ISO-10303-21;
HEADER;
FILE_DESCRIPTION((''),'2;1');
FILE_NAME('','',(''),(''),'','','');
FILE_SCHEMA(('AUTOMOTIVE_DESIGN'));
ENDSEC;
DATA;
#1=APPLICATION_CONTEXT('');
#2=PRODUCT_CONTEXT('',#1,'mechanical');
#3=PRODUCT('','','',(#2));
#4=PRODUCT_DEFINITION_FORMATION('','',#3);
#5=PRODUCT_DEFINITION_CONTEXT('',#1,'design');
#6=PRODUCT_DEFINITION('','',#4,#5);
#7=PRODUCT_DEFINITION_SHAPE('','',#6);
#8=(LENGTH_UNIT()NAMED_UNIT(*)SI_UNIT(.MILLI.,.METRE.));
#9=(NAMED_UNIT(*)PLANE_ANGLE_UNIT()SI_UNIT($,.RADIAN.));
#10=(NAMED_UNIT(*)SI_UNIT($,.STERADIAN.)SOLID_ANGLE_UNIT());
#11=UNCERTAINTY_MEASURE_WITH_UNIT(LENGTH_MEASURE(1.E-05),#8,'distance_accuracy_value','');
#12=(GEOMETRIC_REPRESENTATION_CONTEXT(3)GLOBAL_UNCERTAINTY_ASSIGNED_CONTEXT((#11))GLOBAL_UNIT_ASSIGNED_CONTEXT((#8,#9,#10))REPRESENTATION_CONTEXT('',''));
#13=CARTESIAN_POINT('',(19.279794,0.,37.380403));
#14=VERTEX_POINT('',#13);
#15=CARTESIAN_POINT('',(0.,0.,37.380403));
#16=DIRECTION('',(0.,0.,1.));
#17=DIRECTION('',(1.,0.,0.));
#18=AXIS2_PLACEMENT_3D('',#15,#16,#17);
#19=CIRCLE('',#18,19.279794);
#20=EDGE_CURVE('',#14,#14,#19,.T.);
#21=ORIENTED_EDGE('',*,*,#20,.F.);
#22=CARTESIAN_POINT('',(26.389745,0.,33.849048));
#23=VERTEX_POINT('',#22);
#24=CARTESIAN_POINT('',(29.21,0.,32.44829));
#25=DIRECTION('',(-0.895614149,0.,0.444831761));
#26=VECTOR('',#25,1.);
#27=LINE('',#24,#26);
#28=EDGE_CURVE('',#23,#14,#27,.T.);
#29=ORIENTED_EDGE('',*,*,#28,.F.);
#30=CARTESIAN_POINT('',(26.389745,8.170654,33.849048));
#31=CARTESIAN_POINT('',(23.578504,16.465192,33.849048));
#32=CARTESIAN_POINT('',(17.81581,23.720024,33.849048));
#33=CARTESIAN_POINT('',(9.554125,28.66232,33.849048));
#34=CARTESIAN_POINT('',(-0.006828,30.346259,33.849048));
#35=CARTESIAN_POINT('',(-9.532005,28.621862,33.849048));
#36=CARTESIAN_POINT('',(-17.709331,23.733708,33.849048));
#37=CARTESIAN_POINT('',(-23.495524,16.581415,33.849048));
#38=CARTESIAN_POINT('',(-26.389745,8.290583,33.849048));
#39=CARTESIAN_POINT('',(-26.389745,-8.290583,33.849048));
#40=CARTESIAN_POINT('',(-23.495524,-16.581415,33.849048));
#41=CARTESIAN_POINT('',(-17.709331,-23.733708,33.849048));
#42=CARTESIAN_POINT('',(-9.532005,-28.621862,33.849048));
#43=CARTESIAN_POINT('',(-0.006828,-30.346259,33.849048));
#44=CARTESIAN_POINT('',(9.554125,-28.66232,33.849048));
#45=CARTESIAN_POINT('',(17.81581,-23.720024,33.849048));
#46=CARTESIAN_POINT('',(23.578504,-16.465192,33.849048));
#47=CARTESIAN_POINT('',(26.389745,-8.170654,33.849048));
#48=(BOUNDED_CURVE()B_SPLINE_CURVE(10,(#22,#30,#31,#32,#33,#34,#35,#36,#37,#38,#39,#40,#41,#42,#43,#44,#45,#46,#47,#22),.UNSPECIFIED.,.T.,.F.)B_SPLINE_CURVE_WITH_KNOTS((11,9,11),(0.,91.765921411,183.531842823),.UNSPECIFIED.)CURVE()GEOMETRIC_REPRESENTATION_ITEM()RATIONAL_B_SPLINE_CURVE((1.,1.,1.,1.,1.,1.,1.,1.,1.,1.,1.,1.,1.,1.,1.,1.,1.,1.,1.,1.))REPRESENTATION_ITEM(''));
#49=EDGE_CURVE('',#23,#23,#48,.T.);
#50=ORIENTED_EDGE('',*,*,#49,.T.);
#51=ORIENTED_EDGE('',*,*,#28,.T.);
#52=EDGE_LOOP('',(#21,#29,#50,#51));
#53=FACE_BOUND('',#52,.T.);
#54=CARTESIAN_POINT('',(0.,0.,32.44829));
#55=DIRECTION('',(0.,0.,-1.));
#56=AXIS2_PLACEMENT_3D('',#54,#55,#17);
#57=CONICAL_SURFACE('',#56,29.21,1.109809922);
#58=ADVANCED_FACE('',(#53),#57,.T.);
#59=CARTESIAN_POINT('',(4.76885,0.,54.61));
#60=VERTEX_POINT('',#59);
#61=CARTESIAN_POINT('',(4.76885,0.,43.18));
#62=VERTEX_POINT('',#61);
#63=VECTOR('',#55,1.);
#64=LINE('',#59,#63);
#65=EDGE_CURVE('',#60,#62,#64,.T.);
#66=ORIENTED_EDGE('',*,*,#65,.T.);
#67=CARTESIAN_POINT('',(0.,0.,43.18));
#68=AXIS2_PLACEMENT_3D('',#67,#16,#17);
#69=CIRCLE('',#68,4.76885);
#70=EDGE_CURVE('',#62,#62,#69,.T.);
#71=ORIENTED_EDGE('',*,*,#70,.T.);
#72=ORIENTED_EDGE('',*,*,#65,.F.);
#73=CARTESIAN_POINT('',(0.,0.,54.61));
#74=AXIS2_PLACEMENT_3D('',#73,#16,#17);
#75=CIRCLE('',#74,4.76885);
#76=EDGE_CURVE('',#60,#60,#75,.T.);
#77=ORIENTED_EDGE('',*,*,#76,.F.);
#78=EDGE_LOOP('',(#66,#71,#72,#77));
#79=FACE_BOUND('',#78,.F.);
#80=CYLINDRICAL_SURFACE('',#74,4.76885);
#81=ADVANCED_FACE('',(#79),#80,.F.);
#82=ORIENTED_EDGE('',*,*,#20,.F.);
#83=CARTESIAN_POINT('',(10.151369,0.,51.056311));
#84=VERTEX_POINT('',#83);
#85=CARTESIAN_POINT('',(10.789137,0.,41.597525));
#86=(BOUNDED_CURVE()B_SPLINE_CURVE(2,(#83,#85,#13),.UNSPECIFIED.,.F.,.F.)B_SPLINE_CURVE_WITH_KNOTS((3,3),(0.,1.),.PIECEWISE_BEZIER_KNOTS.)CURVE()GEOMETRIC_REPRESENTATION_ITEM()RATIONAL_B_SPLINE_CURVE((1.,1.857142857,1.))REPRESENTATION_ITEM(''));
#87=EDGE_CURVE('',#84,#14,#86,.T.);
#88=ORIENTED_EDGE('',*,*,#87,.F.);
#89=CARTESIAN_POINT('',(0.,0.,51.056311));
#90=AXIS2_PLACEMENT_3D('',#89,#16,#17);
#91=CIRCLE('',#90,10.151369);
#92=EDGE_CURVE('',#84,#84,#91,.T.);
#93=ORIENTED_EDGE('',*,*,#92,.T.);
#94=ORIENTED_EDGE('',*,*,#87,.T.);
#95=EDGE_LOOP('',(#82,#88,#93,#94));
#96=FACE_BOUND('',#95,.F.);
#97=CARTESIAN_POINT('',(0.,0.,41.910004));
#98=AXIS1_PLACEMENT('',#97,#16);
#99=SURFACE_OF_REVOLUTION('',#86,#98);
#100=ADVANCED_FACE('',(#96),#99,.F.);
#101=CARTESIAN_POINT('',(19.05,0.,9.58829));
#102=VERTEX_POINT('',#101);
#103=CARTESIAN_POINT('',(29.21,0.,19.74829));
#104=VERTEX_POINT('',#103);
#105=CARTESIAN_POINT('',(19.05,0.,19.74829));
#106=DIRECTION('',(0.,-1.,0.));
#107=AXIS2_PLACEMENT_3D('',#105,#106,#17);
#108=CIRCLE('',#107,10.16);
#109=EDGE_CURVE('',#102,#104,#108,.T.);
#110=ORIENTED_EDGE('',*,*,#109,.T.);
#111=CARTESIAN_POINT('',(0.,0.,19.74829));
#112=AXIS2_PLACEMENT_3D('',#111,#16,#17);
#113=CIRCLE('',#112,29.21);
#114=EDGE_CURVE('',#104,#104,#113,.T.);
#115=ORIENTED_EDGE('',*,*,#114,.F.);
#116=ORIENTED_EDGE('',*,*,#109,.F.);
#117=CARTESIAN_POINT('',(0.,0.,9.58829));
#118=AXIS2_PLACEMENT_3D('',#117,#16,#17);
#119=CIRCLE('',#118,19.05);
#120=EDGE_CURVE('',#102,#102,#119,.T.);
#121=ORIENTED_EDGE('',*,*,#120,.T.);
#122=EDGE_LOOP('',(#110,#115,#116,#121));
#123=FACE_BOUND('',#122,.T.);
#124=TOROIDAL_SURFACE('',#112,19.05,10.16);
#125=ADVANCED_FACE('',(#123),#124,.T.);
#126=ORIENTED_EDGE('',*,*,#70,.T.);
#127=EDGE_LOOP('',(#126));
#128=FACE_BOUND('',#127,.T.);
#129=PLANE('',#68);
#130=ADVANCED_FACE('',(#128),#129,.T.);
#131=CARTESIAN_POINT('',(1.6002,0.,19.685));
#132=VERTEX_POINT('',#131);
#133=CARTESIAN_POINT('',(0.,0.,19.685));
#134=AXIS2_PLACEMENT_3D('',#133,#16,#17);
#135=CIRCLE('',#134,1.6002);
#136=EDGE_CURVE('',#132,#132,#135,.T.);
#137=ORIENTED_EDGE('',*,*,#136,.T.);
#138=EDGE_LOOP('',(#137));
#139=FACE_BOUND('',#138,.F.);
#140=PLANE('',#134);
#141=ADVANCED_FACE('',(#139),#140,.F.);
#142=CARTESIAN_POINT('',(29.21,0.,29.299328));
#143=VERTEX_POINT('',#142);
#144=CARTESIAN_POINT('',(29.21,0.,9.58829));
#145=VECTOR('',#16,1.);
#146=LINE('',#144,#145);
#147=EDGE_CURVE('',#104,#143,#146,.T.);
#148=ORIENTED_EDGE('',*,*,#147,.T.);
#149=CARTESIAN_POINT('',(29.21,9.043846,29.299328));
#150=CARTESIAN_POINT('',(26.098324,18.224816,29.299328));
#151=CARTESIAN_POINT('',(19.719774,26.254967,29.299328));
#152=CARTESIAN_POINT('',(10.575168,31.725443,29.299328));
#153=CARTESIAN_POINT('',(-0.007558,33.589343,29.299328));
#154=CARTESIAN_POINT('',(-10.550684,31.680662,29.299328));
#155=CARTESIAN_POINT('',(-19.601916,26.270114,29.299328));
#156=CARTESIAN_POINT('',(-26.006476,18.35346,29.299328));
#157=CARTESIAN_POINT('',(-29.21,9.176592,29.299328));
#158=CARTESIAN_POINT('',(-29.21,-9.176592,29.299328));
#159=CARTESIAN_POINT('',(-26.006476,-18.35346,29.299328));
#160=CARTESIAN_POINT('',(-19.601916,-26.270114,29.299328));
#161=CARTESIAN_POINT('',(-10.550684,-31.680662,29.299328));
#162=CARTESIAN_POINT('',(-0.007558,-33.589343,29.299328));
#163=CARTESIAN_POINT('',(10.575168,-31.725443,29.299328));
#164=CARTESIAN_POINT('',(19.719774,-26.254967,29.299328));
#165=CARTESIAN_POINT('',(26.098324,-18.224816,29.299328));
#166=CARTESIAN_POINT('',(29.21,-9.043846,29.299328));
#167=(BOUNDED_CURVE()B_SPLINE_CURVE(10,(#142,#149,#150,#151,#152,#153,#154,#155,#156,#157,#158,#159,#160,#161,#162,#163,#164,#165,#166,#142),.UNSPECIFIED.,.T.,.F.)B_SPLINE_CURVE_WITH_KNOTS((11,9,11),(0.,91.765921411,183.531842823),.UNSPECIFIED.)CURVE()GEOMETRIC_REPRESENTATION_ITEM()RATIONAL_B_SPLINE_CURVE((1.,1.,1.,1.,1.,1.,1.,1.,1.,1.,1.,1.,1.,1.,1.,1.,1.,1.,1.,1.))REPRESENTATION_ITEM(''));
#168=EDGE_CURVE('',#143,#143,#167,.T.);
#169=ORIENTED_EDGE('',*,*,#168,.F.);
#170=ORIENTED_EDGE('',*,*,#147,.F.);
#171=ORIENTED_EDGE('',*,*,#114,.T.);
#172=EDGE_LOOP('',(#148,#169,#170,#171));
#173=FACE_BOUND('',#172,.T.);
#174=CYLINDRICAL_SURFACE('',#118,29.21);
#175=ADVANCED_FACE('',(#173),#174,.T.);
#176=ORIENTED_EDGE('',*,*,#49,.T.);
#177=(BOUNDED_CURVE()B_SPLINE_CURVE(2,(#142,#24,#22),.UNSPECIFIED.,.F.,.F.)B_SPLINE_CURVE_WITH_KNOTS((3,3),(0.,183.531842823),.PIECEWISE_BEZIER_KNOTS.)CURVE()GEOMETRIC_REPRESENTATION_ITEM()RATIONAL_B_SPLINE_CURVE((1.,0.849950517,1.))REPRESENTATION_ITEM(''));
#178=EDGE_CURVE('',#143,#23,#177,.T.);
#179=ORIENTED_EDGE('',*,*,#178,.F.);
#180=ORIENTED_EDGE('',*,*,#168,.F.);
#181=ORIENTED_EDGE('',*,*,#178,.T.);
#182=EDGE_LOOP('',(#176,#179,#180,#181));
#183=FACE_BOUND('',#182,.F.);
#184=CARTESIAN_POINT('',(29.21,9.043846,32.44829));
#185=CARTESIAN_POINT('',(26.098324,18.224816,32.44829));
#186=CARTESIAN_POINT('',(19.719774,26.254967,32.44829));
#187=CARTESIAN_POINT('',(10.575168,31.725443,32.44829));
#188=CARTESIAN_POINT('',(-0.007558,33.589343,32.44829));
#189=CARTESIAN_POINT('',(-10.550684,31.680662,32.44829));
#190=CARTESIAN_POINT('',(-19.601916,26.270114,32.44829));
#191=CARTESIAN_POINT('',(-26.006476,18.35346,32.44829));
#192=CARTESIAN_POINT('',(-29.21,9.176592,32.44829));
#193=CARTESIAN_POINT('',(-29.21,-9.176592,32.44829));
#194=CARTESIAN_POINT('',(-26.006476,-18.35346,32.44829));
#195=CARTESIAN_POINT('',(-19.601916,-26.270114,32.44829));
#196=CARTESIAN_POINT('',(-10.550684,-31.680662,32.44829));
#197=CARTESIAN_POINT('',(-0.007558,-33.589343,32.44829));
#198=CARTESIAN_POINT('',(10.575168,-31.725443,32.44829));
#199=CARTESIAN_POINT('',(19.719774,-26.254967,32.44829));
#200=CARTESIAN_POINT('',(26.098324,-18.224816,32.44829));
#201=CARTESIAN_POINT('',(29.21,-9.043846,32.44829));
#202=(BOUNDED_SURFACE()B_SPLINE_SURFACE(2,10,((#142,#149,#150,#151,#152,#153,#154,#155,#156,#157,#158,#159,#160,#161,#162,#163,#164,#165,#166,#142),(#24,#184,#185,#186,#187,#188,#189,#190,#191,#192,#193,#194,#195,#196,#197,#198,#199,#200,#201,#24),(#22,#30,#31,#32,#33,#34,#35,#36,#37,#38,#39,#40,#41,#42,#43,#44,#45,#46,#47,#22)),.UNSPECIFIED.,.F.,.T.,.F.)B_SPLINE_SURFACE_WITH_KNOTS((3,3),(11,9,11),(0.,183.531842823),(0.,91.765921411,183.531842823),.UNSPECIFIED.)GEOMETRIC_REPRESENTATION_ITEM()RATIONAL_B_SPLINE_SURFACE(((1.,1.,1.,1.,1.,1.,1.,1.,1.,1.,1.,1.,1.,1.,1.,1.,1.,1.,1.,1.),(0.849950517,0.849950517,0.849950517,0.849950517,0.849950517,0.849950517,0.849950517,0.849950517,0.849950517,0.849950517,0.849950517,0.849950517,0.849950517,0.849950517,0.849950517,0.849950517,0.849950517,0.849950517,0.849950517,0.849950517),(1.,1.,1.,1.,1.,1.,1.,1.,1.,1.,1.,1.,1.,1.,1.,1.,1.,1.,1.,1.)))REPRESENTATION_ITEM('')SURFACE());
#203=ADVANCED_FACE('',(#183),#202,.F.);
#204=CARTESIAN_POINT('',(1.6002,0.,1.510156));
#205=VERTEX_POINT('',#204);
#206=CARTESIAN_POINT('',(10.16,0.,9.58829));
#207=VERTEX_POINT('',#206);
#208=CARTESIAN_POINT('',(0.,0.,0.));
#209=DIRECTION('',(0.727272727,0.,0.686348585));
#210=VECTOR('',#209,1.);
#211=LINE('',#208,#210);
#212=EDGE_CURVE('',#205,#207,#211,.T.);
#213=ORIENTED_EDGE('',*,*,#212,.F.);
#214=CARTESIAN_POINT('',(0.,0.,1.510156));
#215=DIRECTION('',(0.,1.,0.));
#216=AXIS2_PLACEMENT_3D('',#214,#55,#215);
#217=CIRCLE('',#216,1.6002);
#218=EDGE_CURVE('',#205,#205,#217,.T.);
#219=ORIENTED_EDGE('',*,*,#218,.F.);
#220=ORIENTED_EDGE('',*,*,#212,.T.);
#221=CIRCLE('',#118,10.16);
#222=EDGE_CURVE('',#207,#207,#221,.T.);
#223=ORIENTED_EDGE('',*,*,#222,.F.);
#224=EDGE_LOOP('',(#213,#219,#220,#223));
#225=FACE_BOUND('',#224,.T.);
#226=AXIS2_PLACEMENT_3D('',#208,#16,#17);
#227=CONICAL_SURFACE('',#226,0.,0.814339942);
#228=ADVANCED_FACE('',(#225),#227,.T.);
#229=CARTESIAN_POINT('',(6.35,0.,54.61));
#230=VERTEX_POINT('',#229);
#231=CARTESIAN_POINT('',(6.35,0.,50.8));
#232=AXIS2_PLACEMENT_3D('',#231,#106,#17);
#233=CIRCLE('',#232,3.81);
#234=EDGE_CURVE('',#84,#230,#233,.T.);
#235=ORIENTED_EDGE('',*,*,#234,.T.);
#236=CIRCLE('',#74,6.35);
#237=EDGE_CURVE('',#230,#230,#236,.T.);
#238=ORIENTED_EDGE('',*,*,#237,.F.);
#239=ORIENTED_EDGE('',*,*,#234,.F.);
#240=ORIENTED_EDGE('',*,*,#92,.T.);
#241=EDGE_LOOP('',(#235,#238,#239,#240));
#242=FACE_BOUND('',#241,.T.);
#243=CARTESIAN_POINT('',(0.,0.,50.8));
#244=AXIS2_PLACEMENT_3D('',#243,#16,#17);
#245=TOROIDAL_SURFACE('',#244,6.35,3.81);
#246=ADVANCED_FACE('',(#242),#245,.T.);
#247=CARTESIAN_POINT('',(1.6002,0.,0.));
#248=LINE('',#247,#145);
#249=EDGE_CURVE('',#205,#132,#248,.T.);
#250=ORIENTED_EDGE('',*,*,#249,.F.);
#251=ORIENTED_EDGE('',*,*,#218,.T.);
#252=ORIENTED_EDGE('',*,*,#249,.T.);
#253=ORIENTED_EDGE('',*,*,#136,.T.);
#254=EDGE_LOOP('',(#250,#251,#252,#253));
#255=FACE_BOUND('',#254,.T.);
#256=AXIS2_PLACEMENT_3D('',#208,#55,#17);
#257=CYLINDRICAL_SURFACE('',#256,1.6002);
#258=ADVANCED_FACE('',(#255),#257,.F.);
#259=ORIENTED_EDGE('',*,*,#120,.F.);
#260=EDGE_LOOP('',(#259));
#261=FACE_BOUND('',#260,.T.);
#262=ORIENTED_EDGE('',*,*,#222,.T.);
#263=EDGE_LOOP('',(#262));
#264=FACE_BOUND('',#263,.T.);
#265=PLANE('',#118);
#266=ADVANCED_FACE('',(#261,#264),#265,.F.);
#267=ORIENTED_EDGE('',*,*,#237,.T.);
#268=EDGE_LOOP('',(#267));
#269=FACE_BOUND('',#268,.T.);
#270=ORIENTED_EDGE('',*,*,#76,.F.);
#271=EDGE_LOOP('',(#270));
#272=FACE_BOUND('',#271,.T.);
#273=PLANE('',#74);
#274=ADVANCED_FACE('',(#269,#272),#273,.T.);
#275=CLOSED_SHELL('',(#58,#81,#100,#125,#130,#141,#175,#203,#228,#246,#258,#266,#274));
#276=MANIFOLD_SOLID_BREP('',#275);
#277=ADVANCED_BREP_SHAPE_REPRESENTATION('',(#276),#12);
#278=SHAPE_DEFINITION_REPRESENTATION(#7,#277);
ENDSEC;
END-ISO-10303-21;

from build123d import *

# Parameters (mm, degrees)
F2_R     = 10.16
F3_R     = 5.08
F4_R     = 4.76885
F5_DEPTH = 11.43
F6_R     = 1.6002
F7_DEPTH = 19.685
F8_R     = 3.81


# Not quite as in the source:
# - a fillet or chamfer that OpenCascade refuses, or shapes differently, is made with other operations: its cross-section is extruded or revolved along the edge and cut away or added


with BuildPart() as f1:
    # F0 (on Front) → F1 (revolve)
    with BuildSketch(Plane.XZ):
        Polygon((0, 54.61), (0, 0), (10.16, 9.5882897328), (29.21, 9.5882897328), (29.21, 32.4482897328), (10.16, 41.9100038707), (10.16, 54.61), align=None)
    revolve(axis=Axis((0, 0, 27.305), (0, 0, 1)))

    # F2
    f2_edges = [f1.edges().sort_by_distance(p)[0] for p in [
        (-29.21, 0, 9.58829),
    ]]
    fillet(f2_edges, radius=F2_R)

    # F3
    f3_edges = [f1.edges().sort_by_distance(p)[0] for p in [
        (-29.21, 0, 32.44829),
    ]]
    fillet(f3_edges, radius=F3_R)

    # F4 (on face) → F5 (cut)
    with BuildSketch(Plane.XY.offset(54.61)):
        Circle(F4_R)
    extrude(amount=-F5_DEPTH, mode=Mode.SUBTRACT)

    # F6 (on Top) → F7 (cut)
    with BuildSketch(Plane.XY):
        Circle(F6_R)
    extrude(amount=F7_DEPTH, mode=Mode.SUBTRACT)

    # F8
    f8_edges = [f1.edges().sort_by_distance(p)[0] for p in [
        (-10.16, 0, 54.61),
    ]]
    fillet(f8_edges, radius=F8_R)

    # F9: fillet of radius 16.51 on 3 edges, made by hand

    # F9_s1 → F9_t2 (revolve)
    with BuildSketch(Plane.XZ):
        with BuildLine():
            add(Edge.make_bspline(
                [(10.1513687758, 51.056311199), (10.7891371387, 41.5975253532), (19.279794422, 37.3804034604)],
                knots=[0, 0, 0, 1, 1, 1], degree=2, weights=[1, 1.8571428571, 1]))
            Line((19.279794422, 37.3804034604), (18.5453771838, 35.9017445003))
            Line((18.5453771838, 35.9017445003), (9.4255827618, 40.4313449106))
            Line((9.4255827618, 40.4313449106), (8.509, 41.9100038707))
            ThreePointArc((8.509, 41.9100038707), (8.509, 50.8), (8.5041089729, 50.9452430127))
            Line((8.5041089729, 50.9452430127), (10.1513687758, 51.056311199))
        make_face()
    revolve(axis=Axis((0, 0, 41.9100038707), (0, 0, 1)))


solid = f1.part
